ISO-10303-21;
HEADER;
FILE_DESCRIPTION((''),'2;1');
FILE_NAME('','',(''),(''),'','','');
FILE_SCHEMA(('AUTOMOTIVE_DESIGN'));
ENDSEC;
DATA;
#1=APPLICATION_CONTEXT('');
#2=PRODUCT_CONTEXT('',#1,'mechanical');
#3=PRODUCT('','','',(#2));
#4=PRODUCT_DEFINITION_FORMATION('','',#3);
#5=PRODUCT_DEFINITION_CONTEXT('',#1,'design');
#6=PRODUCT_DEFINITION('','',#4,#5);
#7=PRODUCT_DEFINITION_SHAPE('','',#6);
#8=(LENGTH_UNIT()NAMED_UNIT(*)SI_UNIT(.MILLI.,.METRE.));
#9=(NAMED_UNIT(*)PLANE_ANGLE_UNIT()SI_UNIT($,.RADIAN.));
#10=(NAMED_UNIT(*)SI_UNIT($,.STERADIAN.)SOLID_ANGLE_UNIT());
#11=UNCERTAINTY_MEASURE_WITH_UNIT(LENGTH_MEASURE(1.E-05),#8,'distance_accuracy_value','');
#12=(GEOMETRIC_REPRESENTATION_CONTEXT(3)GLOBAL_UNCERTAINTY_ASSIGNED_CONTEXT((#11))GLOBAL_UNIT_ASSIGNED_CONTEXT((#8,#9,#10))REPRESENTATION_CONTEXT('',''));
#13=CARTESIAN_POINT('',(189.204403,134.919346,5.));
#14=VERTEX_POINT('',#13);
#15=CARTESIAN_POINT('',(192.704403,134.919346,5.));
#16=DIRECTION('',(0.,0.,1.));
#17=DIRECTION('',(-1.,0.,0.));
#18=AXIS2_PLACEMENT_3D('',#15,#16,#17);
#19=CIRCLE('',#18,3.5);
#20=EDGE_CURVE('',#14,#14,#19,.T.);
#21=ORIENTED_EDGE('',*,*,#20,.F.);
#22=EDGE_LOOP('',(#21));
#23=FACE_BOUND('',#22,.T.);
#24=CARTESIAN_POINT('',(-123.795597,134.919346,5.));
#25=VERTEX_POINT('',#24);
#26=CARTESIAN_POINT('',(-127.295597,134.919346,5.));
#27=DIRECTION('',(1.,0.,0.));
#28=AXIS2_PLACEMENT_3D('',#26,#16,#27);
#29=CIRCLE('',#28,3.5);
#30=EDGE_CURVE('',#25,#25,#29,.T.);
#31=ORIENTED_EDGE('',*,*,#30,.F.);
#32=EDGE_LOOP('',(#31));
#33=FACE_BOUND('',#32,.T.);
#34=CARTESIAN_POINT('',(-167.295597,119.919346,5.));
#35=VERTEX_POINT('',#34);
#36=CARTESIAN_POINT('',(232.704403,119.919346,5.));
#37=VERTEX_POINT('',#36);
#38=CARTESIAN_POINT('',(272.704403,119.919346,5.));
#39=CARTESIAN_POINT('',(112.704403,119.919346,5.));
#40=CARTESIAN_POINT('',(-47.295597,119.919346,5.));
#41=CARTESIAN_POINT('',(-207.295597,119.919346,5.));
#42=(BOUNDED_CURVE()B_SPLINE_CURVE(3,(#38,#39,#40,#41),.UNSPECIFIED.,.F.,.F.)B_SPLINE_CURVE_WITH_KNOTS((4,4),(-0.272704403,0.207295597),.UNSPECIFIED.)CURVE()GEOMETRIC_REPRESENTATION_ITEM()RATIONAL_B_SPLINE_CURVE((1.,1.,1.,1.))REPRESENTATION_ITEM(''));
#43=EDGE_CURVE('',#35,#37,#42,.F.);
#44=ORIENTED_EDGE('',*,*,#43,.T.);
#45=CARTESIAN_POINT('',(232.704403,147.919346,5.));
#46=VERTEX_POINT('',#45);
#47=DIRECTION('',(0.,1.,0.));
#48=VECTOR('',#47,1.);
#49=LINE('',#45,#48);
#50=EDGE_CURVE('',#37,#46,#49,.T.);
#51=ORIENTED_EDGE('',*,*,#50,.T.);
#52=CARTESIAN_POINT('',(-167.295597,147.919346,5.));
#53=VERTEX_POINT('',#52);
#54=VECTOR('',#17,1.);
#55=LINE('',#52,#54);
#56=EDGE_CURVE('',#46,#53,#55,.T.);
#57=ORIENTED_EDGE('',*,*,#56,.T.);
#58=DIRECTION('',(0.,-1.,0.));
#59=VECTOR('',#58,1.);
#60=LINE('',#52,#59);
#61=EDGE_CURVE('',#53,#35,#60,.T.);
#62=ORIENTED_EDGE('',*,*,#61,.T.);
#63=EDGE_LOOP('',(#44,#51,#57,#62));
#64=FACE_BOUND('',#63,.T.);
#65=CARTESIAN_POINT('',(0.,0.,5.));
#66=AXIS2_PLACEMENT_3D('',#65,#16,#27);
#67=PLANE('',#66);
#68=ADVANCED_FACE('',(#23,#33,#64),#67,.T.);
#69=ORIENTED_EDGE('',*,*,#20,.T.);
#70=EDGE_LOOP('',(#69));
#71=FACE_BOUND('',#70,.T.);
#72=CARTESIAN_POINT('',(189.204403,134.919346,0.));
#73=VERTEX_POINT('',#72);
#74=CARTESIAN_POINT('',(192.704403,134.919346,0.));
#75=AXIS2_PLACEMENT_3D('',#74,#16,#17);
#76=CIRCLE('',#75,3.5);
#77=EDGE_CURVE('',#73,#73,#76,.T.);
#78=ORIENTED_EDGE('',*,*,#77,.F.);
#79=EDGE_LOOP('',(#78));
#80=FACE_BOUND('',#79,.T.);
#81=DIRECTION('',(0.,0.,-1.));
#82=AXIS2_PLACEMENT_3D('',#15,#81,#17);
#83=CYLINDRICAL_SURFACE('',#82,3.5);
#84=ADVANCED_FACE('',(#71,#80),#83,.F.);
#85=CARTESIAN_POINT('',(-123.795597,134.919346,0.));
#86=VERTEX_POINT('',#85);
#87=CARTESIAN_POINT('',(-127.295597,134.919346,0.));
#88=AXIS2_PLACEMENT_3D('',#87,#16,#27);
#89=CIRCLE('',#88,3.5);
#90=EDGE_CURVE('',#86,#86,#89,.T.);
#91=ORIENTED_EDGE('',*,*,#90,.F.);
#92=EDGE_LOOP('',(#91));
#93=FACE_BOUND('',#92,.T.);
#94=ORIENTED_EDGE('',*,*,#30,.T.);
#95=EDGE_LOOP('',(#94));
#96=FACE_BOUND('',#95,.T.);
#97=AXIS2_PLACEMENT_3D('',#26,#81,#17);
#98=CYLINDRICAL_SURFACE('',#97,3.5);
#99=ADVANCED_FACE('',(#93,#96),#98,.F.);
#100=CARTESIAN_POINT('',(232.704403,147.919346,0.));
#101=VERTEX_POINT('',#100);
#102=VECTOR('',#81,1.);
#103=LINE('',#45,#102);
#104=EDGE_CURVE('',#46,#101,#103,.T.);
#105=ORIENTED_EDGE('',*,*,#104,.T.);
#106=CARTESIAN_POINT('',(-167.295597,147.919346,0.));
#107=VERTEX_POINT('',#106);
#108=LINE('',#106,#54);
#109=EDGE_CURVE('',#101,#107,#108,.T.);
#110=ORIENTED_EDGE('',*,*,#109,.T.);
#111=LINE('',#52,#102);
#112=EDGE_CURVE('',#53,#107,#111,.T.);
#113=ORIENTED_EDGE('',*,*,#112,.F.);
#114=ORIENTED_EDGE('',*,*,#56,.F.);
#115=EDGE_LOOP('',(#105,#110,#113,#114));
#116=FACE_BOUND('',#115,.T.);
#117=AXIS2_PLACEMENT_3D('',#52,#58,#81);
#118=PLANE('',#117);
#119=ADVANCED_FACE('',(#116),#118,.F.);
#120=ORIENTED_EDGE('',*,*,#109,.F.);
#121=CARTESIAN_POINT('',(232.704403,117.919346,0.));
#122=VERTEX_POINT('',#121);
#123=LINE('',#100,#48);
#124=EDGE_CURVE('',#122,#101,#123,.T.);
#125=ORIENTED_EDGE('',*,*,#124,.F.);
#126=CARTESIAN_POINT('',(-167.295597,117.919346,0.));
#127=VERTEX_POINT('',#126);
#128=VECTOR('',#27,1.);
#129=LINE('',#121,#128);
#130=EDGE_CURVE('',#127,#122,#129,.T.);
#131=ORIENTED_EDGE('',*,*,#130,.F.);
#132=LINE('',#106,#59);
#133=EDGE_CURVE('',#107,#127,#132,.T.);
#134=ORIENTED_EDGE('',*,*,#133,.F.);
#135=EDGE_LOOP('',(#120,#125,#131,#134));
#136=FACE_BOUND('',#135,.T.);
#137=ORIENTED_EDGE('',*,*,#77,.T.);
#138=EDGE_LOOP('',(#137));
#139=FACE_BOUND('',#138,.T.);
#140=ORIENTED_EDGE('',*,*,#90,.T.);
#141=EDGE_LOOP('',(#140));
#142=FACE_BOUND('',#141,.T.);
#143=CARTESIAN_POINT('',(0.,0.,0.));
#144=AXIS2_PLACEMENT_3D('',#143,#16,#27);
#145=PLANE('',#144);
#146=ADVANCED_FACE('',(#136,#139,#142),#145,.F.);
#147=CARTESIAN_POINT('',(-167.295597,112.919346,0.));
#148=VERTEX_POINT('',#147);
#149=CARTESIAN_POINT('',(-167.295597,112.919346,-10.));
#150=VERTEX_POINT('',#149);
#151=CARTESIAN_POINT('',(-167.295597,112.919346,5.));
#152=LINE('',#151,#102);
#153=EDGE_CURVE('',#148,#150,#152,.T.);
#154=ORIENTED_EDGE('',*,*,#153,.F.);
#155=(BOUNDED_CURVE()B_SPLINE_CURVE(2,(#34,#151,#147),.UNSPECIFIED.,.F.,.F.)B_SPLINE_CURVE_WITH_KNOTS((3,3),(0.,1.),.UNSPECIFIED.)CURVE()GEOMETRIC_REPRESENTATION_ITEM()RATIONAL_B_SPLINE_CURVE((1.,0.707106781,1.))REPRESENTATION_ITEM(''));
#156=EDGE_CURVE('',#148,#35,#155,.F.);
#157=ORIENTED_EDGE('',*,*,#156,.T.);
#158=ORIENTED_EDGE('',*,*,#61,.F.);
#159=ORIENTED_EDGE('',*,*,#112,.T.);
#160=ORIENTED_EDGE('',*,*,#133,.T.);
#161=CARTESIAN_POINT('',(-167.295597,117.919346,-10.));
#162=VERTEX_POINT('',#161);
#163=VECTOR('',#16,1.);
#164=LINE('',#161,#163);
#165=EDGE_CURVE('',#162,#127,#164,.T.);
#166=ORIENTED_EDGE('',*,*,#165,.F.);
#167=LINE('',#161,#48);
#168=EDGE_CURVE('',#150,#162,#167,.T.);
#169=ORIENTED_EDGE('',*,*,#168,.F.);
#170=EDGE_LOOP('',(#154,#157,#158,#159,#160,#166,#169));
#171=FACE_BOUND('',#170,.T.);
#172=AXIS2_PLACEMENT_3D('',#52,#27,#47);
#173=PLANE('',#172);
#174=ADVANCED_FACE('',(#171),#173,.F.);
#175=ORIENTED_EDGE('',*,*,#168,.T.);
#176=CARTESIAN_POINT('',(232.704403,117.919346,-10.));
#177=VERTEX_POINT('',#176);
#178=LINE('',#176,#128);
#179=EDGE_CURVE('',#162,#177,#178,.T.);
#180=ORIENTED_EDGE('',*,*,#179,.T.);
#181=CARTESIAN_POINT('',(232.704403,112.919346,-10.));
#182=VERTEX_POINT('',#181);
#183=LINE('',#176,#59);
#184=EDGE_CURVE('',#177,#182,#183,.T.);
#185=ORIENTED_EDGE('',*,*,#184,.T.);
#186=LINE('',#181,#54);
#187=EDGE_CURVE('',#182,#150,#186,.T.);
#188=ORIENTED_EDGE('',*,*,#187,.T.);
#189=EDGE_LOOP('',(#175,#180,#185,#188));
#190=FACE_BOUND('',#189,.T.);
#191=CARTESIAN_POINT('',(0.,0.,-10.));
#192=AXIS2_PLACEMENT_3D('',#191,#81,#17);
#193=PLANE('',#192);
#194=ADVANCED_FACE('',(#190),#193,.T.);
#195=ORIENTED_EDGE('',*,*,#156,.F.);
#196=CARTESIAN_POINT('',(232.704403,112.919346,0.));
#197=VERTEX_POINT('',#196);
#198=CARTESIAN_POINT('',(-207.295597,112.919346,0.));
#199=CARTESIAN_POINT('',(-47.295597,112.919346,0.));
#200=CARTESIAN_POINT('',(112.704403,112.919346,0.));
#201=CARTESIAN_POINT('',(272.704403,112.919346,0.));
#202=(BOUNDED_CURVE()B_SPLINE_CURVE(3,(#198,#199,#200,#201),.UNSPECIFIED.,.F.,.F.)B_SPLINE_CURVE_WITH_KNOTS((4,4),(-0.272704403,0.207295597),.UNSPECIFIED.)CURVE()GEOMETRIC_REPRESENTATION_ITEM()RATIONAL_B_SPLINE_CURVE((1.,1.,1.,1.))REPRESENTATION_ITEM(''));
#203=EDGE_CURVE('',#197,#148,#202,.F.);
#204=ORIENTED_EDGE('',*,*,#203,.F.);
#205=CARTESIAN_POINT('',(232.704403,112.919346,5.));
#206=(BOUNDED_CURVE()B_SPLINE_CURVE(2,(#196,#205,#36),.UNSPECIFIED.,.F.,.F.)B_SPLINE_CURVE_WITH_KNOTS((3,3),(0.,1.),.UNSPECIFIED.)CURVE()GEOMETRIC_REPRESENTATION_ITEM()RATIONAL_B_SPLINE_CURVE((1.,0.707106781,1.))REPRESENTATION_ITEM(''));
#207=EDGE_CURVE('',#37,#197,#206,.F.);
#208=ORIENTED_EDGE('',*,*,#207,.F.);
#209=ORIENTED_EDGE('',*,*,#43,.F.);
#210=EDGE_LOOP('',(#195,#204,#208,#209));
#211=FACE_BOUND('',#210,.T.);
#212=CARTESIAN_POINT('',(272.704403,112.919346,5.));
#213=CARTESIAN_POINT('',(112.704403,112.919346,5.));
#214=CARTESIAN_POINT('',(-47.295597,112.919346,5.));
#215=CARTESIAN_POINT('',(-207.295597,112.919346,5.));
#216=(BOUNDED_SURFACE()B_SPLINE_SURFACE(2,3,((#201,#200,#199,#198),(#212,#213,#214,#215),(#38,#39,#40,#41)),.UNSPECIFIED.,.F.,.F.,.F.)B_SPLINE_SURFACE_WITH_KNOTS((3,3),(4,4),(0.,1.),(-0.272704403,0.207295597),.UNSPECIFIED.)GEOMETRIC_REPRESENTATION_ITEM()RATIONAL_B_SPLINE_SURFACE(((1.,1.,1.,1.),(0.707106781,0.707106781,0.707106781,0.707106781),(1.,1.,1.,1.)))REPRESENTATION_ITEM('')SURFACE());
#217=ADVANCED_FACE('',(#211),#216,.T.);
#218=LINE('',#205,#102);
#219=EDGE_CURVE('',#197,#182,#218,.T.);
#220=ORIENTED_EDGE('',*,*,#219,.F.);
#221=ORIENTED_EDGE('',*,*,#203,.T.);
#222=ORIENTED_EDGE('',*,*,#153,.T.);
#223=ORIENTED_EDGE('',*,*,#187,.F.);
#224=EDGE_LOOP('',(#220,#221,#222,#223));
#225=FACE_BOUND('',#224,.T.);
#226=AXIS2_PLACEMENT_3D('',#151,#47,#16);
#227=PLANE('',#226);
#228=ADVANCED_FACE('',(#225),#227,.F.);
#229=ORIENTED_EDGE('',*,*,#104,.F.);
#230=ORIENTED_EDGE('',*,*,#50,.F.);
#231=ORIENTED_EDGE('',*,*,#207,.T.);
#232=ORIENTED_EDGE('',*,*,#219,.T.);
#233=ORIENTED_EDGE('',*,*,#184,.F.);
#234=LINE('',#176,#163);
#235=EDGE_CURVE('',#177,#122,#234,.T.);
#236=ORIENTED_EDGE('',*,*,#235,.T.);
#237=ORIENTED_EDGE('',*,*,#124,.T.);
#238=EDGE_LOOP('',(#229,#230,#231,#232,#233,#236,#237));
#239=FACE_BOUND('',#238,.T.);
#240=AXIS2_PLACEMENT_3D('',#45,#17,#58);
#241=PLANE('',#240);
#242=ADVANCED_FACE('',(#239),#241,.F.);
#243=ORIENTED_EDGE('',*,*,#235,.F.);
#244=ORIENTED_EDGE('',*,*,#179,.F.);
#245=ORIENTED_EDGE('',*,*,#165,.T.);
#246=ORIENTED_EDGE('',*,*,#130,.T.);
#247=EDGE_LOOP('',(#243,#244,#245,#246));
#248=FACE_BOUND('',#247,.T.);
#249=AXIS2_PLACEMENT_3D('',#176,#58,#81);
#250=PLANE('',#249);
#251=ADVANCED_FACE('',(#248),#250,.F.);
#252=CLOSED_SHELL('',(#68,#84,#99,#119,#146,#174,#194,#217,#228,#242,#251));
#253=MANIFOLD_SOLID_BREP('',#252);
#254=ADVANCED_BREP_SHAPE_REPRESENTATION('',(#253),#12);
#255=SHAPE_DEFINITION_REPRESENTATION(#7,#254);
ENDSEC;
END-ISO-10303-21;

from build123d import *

# Parameters (mm, degrees)
SKETCH_1_W      = 400
SKETCH_1_H      = 35
SKETCH_1_R      = 3.5
EXTRUDE_1_DEPTH = 5
SKETCH_2_W      = 400
SKETCH_2_H      = 5
EXTRUDE_2_DEPTH = 10
FILLET_1_SIZE   = 7
FILLET_1_SIZE_2 = 5


with BuildPart() as part:
    # 草图1 → 凸台-拉伸1 (new body)
    with BuildSketch(Plane.XY):
        with Locations((32.704402516, 130.419346185)):
            Rectangle(SKETCH_1_W, SKETCH_1_H)
        with Locations((-127.295597484, 134.919346185)):
            Circle(SKETCH_1_R, mode=Mode.SUBTRACT)
        with Locations(Location((192.704402516, 134.919346185, 0), (0, 0, 180))):
            Circle(SKETCH_1_R, mode=Mode.SUBTRACT)
    extrude(amount=EXTRUDE_1_DEPTH)

    # 草图2 → 凸台-拉伸2 (add)
    with BuildSketch(Plane(origin=(0, 0, 0), x_dir=(-1, 0, 0), z_dir=(0, 0, -1))):
        with Locations((-32.704402516, 115.419346185)):
            Rectangle(SKETCH_2_W, SKETCH_2_H)
    extrude(amount=EXTRUDE_2_DEPTH)

    # 圆角1
    # an asymmetric fillet: 7, 5 mm, written as the material it takes off along each edge
    with BuildSketch(Plane(origin=(250.204402516, 112.919346185, 5), x_dir=(0, 1, 0), z_dir=(-1, 0, 0))) as fillet_1_piece_1:
        with BuildLine():
            Bezier((FILLET_1_SIZE, 0), (0, 0), (0, FILLET_1_SIZE_2), weights=[1, 0.707106781, 1])
            Line((0, FILLET_1_SIZE_2), (0, 0))
            Line((0, 0), (FILLET_1_SIZE, 0))
        make_face()
    extrude(amount=435, mode=Mode.SUBTRACT)


solid = part.part
